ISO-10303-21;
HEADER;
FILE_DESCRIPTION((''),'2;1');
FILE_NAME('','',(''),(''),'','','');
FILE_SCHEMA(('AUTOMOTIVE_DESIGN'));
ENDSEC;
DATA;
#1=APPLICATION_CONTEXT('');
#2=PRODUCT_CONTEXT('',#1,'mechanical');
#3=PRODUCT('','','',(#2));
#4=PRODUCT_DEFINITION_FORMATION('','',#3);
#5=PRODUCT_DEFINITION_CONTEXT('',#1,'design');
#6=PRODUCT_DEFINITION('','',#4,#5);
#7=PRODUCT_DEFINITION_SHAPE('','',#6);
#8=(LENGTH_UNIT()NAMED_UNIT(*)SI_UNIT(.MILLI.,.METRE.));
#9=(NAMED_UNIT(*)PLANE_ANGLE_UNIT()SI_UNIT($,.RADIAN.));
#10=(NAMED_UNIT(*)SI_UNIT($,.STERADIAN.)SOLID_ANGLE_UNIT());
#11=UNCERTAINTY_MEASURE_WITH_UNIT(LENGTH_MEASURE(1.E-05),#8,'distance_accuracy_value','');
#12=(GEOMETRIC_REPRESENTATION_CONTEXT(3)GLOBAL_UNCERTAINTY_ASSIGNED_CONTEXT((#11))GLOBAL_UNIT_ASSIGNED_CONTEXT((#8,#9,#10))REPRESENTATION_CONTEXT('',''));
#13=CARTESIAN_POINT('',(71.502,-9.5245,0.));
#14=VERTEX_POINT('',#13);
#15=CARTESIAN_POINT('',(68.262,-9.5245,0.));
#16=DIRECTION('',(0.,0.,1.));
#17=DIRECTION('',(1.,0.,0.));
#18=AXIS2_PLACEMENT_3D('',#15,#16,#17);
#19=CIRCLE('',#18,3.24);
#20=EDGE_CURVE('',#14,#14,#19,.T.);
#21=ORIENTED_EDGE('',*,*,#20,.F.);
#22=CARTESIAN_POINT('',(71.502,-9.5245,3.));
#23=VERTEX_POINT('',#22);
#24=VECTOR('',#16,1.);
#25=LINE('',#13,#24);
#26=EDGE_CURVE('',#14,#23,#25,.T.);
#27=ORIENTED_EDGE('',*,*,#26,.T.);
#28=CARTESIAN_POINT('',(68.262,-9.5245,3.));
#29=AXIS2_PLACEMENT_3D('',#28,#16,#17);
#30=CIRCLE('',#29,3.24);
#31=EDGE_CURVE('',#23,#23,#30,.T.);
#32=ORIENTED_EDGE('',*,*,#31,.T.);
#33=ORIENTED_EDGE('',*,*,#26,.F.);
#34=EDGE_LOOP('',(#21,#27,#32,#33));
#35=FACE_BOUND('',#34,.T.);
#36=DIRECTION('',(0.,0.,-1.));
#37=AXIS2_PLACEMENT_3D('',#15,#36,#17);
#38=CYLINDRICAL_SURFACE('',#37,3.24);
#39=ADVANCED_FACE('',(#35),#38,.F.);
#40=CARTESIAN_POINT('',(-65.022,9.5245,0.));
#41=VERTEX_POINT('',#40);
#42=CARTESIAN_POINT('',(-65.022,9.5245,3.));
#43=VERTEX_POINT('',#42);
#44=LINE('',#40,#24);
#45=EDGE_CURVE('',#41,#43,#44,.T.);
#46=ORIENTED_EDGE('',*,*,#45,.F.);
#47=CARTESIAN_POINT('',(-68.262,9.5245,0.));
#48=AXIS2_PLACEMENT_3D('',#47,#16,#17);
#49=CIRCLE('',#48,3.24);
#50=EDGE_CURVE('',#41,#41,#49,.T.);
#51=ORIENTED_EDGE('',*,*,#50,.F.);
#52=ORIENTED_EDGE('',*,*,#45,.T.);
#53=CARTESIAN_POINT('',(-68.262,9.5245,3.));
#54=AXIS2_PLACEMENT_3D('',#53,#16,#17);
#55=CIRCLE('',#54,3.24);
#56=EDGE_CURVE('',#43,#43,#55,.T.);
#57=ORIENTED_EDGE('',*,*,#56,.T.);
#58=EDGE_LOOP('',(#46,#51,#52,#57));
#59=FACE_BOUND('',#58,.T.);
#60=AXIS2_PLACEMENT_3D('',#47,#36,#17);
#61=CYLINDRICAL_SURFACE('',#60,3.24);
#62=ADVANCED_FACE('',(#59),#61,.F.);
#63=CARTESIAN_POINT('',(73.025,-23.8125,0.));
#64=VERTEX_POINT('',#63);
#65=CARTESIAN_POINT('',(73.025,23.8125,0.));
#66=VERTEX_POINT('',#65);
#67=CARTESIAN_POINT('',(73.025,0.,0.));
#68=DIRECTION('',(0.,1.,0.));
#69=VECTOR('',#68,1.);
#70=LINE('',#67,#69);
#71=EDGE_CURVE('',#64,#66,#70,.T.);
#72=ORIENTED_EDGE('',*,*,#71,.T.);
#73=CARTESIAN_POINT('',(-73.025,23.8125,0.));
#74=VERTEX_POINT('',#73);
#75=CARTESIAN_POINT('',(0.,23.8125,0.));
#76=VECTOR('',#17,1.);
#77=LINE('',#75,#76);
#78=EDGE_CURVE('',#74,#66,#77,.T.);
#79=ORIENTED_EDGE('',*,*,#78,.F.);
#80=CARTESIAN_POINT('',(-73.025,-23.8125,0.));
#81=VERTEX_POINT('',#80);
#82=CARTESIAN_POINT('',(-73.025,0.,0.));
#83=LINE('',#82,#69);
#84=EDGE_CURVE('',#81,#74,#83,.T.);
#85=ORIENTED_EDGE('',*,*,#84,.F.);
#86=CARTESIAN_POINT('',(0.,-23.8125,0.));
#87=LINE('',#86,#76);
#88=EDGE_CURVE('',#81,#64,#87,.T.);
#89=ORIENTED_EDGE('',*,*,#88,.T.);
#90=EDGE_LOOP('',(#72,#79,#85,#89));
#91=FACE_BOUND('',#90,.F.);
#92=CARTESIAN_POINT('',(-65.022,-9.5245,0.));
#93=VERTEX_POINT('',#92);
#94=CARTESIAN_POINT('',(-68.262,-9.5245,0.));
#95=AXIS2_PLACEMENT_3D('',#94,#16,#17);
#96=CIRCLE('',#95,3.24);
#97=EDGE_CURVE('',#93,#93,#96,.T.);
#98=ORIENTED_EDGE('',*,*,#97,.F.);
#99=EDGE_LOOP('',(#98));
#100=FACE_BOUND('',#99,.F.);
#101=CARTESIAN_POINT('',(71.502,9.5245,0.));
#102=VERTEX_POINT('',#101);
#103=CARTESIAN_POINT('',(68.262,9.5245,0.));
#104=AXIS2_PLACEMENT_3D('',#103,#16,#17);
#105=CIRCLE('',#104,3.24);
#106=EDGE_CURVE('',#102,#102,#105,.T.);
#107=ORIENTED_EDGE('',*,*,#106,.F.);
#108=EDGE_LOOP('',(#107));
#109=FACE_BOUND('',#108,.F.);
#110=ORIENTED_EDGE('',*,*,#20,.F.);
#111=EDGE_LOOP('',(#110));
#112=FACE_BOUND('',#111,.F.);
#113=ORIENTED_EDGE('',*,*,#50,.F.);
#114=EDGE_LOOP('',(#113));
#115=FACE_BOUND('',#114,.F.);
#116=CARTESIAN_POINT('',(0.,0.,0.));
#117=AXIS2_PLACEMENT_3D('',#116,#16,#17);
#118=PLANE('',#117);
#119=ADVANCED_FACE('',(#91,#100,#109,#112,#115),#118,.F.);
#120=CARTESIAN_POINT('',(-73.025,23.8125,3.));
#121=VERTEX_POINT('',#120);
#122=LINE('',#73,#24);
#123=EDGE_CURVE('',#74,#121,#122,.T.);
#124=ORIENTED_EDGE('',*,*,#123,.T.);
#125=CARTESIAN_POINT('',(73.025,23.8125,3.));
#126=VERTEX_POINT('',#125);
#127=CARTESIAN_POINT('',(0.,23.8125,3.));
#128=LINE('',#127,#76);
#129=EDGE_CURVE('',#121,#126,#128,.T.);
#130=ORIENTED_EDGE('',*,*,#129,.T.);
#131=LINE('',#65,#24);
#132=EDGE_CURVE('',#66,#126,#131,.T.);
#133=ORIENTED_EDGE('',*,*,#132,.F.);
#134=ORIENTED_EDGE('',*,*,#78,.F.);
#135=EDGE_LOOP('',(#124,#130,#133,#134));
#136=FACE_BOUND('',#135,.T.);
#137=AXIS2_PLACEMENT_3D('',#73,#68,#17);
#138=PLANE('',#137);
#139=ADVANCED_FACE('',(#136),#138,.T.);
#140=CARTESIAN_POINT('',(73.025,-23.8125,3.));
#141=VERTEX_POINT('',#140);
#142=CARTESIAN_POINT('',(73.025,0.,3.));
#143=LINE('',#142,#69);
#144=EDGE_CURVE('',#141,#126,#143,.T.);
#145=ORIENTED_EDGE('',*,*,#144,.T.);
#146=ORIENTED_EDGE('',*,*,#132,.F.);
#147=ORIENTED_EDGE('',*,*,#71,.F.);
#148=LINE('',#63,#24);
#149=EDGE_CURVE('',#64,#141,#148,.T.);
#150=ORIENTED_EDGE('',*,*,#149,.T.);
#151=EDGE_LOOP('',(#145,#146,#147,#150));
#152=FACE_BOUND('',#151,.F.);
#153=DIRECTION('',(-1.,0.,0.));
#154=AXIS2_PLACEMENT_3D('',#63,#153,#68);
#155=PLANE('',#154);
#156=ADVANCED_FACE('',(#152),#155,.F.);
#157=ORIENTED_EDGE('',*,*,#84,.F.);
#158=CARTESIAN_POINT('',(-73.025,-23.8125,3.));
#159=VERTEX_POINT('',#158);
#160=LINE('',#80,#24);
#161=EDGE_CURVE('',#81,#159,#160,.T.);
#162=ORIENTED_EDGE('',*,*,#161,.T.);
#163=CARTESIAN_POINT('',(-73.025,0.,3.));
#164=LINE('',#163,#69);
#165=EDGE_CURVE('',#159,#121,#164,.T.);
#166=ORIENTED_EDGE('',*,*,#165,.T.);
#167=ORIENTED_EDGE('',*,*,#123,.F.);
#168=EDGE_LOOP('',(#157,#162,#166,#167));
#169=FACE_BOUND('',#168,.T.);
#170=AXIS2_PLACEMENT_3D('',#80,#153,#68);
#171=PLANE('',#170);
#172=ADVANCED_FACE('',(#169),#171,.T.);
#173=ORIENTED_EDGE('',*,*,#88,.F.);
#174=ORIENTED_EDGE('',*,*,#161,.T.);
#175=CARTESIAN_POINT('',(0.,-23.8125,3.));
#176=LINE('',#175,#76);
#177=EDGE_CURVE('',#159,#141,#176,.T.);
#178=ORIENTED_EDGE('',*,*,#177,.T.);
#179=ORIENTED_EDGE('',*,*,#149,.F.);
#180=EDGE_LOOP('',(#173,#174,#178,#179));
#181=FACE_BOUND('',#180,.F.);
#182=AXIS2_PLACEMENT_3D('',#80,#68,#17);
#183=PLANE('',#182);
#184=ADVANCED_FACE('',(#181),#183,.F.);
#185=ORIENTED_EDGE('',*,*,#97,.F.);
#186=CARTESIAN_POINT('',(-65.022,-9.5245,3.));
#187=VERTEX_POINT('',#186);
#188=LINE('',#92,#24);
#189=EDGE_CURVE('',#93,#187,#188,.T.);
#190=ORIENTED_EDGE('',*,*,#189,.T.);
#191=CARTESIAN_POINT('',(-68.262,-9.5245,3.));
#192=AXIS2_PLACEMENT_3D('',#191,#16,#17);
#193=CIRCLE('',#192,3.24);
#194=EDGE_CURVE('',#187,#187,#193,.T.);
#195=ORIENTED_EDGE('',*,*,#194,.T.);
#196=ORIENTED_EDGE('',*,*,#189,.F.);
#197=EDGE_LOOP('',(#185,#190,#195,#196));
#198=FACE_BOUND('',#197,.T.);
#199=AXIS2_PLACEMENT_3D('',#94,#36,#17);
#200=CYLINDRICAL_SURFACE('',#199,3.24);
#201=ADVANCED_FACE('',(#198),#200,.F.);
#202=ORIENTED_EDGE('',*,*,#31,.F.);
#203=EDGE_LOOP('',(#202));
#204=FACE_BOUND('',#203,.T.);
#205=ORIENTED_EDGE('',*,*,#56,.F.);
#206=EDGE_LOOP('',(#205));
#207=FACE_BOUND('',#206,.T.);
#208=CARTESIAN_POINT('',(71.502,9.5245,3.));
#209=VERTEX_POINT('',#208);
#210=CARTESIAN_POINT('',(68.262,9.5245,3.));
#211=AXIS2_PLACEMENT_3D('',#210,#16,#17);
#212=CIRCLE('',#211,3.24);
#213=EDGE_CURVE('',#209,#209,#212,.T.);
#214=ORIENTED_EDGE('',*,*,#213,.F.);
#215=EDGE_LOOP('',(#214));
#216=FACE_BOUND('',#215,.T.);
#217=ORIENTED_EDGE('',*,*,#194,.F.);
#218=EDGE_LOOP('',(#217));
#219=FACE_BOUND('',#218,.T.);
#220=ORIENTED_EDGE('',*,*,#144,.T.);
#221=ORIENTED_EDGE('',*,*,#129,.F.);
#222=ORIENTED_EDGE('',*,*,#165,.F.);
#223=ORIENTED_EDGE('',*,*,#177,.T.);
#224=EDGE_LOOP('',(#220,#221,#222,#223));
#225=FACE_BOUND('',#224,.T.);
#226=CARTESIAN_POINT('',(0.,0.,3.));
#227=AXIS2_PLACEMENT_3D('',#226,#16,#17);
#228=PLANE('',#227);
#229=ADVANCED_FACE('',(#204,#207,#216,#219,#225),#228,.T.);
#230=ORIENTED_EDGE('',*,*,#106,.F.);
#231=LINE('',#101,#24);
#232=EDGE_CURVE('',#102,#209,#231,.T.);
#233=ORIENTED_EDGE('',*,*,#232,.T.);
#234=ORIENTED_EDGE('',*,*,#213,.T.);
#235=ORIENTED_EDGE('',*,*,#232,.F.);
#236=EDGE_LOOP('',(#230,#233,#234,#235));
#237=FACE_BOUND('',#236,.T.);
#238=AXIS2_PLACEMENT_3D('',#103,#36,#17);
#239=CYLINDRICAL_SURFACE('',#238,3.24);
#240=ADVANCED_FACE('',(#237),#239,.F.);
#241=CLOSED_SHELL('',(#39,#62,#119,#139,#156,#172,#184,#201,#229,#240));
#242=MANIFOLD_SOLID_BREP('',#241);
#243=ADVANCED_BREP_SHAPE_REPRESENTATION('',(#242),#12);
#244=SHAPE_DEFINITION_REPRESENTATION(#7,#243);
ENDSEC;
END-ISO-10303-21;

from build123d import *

# Parameters (mm, degrees)
F0_W     = 146.05
F0_H     = 47.625
F0_R     = 3.24
F1_DEPTH = 3


# Not quite as in the source:
# - ends of sketch curves that miss each other by under 0.0002 mm in the source are joined


with BuildPart() as f1:
    # F0 (on Top) → F1 (new body)
    with BuildSketch(Plane.XY):
        Rectangle(F0_W, F0_H)
        with Locations((-68.262, -9.5245)):
            Circle(F0_R, mode=Mode.SUBTRACT)
        with Locations((68.262, -9.5245)):
            Circle(F0_R, mode=Mode.SUBTRACT)
        with Locations((-68.262, 9.5245)):
            Circle(F0_R, mode=Mode.SUBTRACT)
        with BuildLine():
            Line((72.225, -15.859485), (72.225, -23.0125))
            Line((72.225, -23.0125), (-72.225, -23.0125))
            Line((-72.225, -23.0125), (-72.225, -15.874133))
            Line((-72.225, -15.874133), (-68.193705, -15.874133))
            ThreePointArc((-68.193705, -15.874133), (-61.912367271, -9.4562050029), (-68.3302949971, -3.174867271))
            Line((-68.3302949971, -3.174867271), (-72.225, -3.174867))
            Line((-72.225, -3.174867), (-72.225, 3.1745))
            Line((-72.225, 3.1745), (-68.262, 3.1745))
            ThreePointArc((-68.262, 3.1745), (-61.912, 9.5245), (-68.262, 15.8745))
            Line((-68.262, 15.8745), (-72.225, 15.8745))
            Line((-72.225, 15.8745), (-72.225, 23.0125))
            Line((-72.225, 23.0125), (72.225, 23.0125))
            Line((72.225, 23.0125), (72.225, 15.8745))
            Line((72.225, 15.8745), (68.262, 15.8745))
            ThreePointArc((68.262, 15.8745), (61.912, 9.5245), (68.262, 3.1745))
            Line((68.262, 3.1745), (72.225, 3.1745))
            Line((72.225, 3.1745), (72.225, -3.189515))
            Line((72.225, -3.189515), (67.825573, -3.189515))
            ThreePointArc((67.825573, -3.189515), (61.9270152731, -9.9609269812), (68.6984269812, -15.8594847269))
            Line((68.6984269812, -15.8594847269), (72.225, -15.859485))
        make_face(mode=Mode.SUBTRACT)
        with Locations((68.262, 9.5245)):
            Circle(F0_R, mode=Mode.SUBTRACT)
        with BuildLine():
            Line((-72.225, -23.0125), (72.225, -23.0125))
            Line((72.225, -23.0125), (72.225, -15.859485))
            Line((72.225, -15.859485), (68.698427, -15.859485))
            ThreePointArc((68.698427, -15.859485), (61.9270152731, -9.9609269812), (67.8255730188, -3.1895152731))
            Line((67.8255730188, -3.1895152731), (72.225, -3.189515))
            Line((72.225, -3.189515), (72.225, 3.1745))
            Line((72.225, 3.1745), (68.262, 3.1745))
            ThreePointArc((68.262, 3.1745), (61.912, 9.5245), (68.262, 15.8745))
            Line((68.262, 15.8745), (72.225, 15.8745))
            Line((72.225, 15.8745), (72.225, 23.0125))
            Line((72.225, 23.0125), (-72.225, 23.0125))
            Line((-72.225, 23.0125), (-72.225, 15.8745))
            Line((-72.225, 15.8745), (-68.262, 15.8745))
            ThreePointArc((-68.262, 15.8745), (-61.912, 9.5245), (-68.262, 3.1745))
            Line((-68.262, 3.1745), (-72.225, 3.1745))
            Line((-72.225, 3.1745), (-72.225, -3.174867))
            Line((-72.225, -3.174867), (-68.330295, -3.174867))
            ThreePointArc((-68.330295, -3.174867), (-61.912367271, -9.4562050029), (-68.1937050029, -15.874132729))
            Line((-68.1937050029, -15.874132729), (-72.225, -15.874133))
            Line((-72.225, -15.874133), (-72.225, -23.0125))
        make_face()
    extrude(amount=F1_DEPTH)


solid = f1.part
